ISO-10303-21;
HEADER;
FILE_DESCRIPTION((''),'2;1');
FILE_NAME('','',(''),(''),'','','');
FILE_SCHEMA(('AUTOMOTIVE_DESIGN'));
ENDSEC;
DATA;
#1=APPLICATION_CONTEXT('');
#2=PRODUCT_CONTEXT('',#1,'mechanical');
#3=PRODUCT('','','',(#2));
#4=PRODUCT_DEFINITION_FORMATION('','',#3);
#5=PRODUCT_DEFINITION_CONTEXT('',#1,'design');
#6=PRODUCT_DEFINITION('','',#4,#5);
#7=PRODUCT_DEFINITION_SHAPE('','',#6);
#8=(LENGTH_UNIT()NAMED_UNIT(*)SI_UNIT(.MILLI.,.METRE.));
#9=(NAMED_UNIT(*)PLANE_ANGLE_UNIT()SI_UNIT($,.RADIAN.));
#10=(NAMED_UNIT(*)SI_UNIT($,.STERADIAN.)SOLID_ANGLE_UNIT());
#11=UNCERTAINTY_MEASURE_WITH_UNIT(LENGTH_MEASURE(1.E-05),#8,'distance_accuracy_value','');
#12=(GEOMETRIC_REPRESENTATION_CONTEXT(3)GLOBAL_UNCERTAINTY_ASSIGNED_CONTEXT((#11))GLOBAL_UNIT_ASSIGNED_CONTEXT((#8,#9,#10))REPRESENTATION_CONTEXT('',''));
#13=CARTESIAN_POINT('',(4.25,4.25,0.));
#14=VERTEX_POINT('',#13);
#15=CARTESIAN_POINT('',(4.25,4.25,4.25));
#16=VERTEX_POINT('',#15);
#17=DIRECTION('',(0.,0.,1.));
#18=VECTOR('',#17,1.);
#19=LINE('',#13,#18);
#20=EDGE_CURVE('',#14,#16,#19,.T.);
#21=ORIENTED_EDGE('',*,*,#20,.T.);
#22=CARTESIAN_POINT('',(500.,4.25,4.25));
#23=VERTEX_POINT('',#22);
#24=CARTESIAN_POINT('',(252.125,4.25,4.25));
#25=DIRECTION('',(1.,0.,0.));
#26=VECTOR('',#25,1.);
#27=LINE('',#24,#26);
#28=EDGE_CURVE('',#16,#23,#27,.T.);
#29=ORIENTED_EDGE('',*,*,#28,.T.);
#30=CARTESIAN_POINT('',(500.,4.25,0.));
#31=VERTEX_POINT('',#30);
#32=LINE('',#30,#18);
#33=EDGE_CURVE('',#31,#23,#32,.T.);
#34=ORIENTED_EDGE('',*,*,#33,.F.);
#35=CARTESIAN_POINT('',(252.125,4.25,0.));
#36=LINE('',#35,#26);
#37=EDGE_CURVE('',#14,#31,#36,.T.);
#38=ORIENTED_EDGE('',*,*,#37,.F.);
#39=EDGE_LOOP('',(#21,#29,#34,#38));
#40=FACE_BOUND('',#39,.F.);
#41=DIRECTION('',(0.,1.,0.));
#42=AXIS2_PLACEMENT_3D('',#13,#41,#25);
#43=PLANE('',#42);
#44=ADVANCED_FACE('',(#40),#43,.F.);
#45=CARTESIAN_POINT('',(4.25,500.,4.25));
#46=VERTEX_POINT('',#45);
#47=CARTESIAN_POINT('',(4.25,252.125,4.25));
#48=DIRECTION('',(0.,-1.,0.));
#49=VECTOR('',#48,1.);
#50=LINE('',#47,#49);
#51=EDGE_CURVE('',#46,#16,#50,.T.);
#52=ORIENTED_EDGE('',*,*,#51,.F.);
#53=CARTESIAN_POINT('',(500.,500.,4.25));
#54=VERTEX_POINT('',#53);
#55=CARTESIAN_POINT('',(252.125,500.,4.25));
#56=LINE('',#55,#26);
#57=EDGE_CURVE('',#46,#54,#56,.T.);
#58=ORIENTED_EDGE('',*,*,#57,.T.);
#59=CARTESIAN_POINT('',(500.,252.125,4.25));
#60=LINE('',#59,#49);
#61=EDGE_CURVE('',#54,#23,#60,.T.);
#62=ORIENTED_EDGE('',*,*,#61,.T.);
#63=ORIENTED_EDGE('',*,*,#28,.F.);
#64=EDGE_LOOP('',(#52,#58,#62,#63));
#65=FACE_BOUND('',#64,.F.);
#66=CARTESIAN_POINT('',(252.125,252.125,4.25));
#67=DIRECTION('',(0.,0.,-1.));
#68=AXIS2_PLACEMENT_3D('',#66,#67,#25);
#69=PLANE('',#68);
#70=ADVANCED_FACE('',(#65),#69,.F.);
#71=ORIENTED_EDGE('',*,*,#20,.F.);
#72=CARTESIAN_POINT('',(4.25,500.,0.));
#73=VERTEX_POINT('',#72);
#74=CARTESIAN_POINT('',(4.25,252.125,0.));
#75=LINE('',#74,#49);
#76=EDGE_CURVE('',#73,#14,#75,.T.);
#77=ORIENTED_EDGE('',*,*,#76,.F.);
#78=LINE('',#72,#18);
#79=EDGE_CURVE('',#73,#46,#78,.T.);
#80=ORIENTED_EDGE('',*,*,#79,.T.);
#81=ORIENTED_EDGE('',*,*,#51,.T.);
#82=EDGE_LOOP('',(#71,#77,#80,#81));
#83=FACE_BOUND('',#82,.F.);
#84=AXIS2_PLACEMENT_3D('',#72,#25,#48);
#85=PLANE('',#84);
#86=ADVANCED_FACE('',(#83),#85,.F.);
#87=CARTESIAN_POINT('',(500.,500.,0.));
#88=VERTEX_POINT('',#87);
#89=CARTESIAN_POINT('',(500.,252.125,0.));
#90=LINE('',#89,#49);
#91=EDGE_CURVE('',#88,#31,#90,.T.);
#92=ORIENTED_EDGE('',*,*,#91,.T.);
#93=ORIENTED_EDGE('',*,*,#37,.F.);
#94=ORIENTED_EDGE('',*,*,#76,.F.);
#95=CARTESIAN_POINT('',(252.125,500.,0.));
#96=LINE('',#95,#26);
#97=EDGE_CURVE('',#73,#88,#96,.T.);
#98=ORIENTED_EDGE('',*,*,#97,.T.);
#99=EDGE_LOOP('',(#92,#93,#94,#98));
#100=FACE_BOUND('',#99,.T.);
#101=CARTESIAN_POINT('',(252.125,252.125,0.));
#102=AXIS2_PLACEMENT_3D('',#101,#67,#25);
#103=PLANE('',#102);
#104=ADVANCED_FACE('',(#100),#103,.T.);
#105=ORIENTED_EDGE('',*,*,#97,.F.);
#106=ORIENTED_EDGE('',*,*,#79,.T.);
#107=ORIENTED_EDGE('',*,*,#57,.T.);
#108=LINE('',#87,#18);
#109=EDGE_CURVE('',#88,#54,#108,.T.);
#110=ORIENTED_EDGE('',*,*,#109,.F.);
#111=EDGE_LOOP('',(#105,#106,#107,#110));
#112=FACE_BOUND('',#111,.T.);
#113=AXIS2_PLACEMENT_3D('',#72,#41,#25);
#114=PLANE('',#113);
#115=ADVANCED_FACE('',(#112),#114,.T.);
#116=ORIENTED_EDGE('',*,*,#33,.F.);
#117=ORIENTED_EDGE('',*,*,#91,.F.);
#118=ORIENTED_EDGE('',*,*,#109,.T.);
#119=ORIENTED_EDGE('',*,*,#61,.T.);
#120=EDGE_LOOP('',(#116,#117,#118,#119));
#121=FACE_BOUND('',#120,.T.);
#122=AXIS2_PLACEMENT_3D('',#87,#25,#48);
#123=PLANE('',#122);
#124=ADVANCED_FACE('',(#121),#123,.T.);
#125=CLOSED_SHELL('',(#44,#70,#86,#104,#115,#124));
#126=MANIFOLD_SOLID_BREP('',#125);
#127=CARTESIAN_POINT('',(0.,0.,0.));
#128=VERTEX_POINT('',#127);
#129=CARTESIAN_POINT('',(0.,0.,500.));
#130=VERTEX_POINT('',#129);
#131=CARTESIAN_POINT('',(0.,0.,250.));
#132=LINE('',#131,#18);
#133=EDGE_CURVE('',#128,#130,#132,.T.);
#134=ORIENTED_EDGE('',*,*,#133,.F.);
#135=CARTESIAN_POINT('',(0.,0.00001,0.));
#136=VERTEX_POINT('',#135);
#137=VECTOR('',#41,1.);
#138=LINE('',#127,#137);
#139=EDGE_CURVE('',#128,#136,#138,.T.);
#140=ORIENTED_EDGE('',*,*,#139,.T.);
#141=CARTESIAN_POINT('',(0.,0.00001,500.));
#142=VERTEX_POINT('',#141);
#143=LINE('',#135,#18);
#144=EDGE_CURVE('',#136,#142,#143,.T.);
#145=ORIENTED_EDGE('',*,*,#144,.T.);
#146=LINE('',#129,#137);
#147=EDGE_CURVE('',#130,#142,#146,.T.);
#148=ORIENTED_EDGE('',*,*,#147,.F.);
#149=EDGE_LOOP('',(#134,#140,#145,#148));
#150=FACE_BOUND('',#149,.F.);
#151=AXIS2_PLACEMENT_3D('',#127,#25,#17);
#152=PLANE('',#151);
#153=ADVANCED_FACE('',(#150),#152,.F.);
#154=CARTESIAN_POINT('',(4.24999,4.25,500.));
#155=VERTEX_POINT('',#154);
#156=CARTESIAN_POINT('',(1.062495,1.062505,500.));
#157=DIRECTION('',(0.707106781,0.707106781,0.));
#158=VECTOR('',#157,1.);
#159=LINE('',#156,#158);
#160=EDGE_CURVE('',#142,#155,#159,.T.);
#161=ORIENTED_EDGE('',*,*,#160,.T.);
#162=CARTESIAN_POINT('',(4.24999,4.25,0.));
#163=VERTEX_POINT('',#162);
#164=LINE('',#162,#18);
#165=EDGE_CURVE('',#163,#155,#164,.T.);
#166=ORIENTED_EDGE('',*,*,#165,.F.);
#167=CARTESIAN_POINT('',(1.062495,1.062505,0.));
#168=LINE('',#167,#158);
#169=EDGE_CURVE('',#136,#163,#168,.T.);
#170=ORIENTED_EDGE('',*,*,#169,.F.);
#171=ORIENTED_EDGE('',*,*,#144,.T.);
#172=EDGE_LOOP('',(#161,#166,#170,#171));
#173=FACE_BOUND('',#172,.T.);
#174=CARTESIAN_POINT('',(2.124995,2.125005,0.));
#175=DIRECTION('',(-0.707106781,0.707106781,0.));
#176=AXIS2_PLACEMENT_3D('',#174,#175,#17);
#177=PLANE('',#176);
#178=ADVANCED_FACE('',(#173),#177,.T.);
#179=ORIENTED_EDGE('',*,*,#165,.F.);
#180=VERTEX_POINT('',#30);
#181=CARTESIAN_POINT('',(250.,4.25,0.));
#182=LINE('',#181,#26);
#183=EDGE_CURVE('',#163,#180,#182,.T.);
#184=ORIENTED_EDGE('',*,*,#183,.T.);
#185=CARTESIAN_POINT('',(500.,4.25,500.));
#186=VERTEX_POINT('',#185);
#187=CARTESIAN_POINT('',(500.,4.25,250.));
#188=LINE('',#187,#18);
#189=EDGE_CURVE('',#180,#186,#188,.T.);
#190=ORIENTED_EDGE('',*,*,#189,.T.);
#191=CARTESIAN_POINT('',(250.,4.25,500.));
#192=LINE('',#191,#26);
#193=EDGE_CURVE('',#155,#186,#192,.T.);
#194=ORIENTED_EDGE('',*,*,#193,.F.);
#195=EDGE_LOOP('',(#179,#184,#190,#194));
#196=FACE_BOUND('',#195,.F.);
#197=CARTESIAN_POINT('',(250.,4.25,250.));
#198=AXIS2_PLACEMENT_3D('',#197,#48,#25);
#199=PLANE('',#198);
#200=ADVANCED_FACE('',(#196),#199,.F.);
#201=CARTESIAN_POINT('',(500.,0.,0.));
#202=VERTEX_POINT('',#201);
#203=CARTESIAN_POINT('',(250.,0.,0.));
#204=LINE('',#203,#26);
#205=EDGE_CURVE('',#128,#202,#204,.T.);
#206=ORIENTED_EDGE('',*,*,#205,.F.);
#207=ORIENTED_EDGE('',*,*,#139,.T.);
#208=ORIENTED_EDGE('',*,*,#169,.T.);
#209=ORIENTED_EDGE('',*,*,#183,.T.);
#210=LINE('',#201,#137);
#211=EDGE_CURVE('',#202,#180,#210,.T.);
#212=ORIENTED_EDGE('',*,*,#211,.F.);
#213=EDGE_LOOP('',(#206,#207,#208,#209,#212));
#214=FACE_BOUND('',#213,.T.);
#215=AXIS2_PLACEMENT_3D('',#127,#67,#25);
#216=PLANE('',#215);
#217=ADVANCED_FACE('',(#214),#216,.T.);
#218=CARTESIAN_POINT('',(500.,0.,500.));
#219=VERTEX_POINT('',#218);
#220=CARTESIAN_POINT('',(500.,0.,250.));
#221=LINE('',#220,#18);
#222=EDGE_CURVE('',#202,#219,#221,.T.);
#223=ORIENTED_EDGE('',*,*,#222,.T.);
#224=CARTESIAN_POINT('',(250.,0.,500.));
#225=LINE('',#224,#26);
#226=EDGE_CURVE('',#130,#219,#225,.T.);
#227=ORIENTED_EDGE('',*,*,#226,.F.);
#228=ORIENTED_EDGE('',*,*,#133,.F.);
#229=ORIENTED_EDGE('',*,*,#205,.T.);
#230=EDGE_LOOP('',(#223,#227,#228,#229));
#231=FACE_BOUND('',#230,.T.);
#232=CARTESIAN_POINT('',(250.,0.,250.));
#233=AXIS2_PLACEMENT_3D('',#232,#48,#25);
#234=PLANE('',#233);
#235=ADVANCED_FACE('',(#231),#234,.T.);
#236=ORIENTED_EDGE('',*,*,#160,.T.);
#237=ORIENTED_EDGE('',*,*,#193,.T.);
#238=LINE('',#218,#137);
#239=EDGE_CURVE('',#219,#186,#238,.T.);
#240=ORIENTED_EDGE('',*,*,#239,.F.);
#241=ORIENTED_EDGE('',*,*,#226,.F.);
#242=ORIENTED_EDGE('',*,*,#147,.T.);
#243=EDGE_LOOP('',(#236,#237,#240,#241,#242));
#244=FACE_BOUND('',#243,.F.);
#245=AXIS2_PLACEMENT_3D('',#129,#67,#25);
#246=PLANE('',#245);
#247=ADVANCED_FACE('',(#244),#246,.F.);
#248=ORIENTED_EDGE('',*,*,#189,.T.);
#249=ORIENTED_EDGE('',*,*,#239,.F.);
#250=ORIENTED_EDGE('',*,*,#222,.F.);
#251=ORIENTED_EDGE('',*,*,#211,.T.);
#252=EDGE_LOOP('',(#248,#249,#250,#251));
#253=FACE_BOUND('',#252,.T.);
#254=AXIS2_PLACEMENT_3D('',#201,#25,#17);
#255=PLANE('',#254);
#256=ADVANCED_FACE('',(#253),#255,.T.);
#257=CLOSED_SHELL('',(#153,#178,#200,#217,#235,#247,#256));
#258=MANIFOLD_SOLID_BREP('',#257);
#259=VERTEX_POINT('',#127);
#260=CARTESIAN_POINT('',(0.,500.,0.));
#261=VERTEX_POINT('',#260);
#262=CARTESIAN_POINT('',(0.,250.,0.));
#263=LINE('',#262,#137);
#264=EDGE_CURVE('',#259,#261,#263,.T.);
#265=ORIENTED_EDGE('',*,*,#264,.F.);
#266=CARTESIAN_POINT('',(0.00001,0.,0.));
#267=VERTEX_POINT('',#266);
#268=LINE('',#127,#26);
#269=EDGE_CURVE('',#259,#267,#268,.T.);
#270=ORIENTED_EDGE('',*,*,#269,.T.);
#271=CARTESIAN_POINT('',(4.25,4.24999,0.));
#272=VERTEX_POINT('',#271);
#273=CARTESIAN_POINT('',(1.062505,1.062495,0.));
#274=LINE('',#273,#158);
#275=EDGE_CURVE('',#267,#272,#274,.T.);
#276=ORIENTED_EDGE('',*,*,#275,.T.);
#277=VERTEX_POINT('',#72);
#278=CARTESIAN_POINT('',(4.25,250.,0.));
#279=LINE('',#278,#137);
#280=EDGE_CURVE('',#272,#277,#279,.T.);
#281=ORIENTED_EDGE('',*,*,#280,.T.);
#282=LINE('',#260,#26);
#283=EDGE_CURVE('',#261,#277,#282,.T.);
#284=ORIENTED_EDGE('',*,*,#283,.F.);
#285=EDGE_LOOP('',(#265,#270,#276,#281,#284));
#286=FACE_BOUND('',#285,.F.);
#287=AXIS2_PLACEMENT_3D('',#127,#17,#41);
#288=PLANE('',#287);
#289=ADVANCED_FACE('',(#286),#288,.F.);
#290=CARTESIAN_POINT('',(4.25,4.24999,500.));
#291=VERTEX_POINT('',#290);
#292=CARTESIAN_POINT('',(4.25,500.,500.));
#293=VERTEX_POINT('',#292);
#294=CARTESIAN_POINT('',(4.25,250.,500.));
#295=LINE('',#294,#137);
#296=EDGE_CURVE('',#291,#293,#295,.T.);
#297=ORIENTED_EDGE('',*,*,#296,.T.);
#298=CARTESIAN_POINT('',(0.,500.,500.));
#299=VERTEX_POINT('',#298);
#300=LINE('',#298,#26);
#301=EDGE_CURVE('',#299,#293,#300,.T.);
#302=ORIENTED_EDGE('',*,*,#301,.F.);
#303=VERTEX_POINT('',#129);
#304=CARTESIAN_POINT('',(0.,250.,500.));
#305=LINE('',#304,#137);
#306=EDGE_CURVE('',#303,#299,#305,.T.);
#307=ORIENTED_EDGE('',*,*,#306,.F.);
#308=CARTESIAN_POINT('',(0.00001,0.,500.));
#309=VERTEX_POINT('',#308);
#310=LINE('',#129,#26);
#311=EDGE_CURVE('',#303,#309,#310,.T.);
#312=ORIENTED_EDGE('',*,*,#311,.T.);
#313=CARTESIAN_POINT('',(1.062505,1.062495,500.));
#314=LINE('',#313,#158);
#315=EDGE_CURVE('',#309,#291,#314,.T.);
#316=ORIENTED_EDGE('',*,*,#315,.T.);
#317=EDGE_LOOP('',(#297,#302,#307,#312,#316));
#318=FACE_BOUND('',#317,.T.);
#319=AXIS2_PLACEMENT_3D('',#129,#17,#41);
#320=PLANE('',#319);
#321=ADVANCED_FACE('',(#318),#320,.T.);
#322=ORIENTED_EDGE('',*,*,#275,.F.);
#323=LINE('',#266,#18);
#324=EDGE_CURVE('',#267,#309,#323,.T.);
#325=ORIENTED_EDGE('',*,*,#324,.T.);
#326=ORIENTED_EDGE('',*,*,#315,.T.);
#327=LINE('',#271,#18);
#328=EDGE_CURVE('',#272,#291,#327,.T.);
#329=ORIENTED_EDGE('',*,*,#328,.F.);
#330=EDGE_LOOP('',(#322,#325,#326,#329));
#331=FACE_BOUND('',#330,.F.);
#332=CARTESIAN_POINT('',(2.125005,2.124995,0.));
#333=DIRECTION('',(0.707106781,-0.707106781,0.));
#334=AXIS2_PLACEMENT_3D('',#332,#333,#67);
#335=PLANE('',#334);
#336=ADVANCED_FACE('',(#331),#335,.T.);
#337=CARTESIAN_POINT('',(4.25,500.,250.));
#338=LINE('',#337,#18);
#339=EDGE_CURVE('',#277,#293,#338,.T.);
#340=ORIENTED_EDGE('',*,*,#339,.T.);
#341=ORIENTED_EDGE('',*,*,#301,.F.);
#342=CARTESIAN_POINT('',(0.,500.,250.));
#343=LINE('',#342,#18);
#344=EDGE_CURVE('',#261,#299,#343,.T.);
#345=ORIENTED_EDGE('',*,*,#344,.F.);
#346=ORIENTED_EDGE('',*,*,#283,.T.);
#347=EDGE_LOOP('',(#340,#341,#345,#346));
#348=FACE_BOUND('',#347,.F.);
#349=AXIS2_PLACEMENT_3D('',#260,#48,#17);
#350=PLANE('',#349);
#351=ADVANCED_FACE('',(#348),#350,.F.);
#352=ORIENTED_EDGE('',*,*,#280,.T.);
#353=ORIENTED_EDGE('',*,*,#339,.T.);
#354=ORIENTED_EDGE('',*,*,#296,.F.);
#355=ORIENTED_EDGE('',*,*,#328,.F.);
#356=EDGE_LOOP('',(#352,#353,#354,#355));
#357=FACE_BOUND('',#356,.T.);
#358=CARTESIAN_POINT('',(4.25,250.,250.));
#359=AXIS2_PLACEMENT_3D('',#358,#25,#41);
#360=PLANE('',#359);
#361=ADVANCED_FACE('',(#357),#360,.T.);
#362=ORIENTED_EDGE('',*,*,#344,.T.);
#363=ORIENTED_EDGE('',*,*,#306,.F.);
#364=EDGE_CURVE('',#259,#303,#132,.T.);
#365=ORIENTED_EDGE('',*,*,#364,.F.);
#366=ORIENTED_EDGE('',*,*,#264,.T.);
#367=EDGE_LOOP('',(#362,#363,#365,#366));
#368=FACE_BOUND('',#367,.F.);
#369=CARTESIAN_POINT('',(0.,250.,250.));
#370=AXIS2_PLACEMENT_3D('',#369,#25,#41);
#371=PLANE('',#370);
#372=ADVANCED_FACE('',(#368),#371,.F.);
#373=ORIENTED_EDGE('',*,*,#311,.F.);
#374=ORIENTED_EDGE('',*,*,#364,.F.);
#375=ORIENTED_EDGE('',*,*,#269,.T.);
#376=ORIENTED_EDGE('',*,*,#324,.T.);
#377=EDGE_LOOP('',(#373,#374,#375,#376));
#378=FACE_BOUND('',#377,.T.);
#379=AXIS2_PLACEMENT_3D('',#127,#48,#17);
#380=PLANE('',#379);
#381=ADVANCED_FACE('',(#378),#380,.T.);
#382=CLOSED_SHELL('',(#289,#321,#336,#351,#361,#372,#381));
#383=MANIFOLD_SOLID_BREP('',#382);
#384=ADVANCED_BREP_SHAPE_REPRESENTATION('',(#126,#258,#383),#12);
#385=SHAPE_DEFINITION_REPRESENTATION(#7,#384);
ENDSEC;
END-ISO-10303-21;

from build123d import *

# Parameters (mm, degrees)
F1_W      = 500
F1_H      = 500
F2_DEPTH  = 4.25
F3_W      = 500
F3_H      = 500
F4_DEPTH  = 4.25
F5_SIZE   = 4.24999
F5_2_SIZE = 4.24999
F6_W      = 495.75
F6_H      = 495.75
F7_DEPTH  = 4.25


# Not quite as in the source:
# - a fillet or chamfer is up to 0.001 mm smaller than in the source, because OpenCascade refuses the exact size


with BuildPart() as f2:
    # F1 (on Right) → F2 (new body)
    with BuildSketch(Plane.YZ):
        with Locations((250, 250)):
            Rectangle(F1_W, F1_H)
    extrude(amount=F2_DEPTH)

    # F5 (size 4.25 in the source; OpenCascade refuses exactly that, so slightly less here)
    f5_edges = [f2.edges().sort_by_distance(p)[0] for p in [
        (4.25, 0, 250),
    ]]
    chamfer(f5_edges, length=F5_SIZE)


with BuildPart() as f4:
    # F3 (on Front) → F4 (new body)
    with BuildSketch(Plane.XZ):
        with Locations((250, 250)):
            Rectangle(F3_W, F3_H)
    extrude(amount=-F4_DEPTH)

    # F5#2 (size 4.25 in the source; OpenCascade refuses exactly that, so slightly less here)
    f5_2_edges = [f4.edges().sort_by_distance(p)[0] for p in [
        (0, 4.25, 250),
    ]]
    chamfer(f5_2_edges, length=F5_2_SIZE)


with BuildPart() as f7:
    # F6 (on face) → F7 (new body)
    with BuildSketch(Plane(origin=(0, 0, 0), x_dir=(1, 0, 0), z_dir=(0, 0, -1))):
        with Locations((252.125, -252.125)):
            Rectangle(F6_W, F6_H)
    extrude(amount=-F7_DEPTH)


solid = Compound([f2.part, f4.part, f7.part])
